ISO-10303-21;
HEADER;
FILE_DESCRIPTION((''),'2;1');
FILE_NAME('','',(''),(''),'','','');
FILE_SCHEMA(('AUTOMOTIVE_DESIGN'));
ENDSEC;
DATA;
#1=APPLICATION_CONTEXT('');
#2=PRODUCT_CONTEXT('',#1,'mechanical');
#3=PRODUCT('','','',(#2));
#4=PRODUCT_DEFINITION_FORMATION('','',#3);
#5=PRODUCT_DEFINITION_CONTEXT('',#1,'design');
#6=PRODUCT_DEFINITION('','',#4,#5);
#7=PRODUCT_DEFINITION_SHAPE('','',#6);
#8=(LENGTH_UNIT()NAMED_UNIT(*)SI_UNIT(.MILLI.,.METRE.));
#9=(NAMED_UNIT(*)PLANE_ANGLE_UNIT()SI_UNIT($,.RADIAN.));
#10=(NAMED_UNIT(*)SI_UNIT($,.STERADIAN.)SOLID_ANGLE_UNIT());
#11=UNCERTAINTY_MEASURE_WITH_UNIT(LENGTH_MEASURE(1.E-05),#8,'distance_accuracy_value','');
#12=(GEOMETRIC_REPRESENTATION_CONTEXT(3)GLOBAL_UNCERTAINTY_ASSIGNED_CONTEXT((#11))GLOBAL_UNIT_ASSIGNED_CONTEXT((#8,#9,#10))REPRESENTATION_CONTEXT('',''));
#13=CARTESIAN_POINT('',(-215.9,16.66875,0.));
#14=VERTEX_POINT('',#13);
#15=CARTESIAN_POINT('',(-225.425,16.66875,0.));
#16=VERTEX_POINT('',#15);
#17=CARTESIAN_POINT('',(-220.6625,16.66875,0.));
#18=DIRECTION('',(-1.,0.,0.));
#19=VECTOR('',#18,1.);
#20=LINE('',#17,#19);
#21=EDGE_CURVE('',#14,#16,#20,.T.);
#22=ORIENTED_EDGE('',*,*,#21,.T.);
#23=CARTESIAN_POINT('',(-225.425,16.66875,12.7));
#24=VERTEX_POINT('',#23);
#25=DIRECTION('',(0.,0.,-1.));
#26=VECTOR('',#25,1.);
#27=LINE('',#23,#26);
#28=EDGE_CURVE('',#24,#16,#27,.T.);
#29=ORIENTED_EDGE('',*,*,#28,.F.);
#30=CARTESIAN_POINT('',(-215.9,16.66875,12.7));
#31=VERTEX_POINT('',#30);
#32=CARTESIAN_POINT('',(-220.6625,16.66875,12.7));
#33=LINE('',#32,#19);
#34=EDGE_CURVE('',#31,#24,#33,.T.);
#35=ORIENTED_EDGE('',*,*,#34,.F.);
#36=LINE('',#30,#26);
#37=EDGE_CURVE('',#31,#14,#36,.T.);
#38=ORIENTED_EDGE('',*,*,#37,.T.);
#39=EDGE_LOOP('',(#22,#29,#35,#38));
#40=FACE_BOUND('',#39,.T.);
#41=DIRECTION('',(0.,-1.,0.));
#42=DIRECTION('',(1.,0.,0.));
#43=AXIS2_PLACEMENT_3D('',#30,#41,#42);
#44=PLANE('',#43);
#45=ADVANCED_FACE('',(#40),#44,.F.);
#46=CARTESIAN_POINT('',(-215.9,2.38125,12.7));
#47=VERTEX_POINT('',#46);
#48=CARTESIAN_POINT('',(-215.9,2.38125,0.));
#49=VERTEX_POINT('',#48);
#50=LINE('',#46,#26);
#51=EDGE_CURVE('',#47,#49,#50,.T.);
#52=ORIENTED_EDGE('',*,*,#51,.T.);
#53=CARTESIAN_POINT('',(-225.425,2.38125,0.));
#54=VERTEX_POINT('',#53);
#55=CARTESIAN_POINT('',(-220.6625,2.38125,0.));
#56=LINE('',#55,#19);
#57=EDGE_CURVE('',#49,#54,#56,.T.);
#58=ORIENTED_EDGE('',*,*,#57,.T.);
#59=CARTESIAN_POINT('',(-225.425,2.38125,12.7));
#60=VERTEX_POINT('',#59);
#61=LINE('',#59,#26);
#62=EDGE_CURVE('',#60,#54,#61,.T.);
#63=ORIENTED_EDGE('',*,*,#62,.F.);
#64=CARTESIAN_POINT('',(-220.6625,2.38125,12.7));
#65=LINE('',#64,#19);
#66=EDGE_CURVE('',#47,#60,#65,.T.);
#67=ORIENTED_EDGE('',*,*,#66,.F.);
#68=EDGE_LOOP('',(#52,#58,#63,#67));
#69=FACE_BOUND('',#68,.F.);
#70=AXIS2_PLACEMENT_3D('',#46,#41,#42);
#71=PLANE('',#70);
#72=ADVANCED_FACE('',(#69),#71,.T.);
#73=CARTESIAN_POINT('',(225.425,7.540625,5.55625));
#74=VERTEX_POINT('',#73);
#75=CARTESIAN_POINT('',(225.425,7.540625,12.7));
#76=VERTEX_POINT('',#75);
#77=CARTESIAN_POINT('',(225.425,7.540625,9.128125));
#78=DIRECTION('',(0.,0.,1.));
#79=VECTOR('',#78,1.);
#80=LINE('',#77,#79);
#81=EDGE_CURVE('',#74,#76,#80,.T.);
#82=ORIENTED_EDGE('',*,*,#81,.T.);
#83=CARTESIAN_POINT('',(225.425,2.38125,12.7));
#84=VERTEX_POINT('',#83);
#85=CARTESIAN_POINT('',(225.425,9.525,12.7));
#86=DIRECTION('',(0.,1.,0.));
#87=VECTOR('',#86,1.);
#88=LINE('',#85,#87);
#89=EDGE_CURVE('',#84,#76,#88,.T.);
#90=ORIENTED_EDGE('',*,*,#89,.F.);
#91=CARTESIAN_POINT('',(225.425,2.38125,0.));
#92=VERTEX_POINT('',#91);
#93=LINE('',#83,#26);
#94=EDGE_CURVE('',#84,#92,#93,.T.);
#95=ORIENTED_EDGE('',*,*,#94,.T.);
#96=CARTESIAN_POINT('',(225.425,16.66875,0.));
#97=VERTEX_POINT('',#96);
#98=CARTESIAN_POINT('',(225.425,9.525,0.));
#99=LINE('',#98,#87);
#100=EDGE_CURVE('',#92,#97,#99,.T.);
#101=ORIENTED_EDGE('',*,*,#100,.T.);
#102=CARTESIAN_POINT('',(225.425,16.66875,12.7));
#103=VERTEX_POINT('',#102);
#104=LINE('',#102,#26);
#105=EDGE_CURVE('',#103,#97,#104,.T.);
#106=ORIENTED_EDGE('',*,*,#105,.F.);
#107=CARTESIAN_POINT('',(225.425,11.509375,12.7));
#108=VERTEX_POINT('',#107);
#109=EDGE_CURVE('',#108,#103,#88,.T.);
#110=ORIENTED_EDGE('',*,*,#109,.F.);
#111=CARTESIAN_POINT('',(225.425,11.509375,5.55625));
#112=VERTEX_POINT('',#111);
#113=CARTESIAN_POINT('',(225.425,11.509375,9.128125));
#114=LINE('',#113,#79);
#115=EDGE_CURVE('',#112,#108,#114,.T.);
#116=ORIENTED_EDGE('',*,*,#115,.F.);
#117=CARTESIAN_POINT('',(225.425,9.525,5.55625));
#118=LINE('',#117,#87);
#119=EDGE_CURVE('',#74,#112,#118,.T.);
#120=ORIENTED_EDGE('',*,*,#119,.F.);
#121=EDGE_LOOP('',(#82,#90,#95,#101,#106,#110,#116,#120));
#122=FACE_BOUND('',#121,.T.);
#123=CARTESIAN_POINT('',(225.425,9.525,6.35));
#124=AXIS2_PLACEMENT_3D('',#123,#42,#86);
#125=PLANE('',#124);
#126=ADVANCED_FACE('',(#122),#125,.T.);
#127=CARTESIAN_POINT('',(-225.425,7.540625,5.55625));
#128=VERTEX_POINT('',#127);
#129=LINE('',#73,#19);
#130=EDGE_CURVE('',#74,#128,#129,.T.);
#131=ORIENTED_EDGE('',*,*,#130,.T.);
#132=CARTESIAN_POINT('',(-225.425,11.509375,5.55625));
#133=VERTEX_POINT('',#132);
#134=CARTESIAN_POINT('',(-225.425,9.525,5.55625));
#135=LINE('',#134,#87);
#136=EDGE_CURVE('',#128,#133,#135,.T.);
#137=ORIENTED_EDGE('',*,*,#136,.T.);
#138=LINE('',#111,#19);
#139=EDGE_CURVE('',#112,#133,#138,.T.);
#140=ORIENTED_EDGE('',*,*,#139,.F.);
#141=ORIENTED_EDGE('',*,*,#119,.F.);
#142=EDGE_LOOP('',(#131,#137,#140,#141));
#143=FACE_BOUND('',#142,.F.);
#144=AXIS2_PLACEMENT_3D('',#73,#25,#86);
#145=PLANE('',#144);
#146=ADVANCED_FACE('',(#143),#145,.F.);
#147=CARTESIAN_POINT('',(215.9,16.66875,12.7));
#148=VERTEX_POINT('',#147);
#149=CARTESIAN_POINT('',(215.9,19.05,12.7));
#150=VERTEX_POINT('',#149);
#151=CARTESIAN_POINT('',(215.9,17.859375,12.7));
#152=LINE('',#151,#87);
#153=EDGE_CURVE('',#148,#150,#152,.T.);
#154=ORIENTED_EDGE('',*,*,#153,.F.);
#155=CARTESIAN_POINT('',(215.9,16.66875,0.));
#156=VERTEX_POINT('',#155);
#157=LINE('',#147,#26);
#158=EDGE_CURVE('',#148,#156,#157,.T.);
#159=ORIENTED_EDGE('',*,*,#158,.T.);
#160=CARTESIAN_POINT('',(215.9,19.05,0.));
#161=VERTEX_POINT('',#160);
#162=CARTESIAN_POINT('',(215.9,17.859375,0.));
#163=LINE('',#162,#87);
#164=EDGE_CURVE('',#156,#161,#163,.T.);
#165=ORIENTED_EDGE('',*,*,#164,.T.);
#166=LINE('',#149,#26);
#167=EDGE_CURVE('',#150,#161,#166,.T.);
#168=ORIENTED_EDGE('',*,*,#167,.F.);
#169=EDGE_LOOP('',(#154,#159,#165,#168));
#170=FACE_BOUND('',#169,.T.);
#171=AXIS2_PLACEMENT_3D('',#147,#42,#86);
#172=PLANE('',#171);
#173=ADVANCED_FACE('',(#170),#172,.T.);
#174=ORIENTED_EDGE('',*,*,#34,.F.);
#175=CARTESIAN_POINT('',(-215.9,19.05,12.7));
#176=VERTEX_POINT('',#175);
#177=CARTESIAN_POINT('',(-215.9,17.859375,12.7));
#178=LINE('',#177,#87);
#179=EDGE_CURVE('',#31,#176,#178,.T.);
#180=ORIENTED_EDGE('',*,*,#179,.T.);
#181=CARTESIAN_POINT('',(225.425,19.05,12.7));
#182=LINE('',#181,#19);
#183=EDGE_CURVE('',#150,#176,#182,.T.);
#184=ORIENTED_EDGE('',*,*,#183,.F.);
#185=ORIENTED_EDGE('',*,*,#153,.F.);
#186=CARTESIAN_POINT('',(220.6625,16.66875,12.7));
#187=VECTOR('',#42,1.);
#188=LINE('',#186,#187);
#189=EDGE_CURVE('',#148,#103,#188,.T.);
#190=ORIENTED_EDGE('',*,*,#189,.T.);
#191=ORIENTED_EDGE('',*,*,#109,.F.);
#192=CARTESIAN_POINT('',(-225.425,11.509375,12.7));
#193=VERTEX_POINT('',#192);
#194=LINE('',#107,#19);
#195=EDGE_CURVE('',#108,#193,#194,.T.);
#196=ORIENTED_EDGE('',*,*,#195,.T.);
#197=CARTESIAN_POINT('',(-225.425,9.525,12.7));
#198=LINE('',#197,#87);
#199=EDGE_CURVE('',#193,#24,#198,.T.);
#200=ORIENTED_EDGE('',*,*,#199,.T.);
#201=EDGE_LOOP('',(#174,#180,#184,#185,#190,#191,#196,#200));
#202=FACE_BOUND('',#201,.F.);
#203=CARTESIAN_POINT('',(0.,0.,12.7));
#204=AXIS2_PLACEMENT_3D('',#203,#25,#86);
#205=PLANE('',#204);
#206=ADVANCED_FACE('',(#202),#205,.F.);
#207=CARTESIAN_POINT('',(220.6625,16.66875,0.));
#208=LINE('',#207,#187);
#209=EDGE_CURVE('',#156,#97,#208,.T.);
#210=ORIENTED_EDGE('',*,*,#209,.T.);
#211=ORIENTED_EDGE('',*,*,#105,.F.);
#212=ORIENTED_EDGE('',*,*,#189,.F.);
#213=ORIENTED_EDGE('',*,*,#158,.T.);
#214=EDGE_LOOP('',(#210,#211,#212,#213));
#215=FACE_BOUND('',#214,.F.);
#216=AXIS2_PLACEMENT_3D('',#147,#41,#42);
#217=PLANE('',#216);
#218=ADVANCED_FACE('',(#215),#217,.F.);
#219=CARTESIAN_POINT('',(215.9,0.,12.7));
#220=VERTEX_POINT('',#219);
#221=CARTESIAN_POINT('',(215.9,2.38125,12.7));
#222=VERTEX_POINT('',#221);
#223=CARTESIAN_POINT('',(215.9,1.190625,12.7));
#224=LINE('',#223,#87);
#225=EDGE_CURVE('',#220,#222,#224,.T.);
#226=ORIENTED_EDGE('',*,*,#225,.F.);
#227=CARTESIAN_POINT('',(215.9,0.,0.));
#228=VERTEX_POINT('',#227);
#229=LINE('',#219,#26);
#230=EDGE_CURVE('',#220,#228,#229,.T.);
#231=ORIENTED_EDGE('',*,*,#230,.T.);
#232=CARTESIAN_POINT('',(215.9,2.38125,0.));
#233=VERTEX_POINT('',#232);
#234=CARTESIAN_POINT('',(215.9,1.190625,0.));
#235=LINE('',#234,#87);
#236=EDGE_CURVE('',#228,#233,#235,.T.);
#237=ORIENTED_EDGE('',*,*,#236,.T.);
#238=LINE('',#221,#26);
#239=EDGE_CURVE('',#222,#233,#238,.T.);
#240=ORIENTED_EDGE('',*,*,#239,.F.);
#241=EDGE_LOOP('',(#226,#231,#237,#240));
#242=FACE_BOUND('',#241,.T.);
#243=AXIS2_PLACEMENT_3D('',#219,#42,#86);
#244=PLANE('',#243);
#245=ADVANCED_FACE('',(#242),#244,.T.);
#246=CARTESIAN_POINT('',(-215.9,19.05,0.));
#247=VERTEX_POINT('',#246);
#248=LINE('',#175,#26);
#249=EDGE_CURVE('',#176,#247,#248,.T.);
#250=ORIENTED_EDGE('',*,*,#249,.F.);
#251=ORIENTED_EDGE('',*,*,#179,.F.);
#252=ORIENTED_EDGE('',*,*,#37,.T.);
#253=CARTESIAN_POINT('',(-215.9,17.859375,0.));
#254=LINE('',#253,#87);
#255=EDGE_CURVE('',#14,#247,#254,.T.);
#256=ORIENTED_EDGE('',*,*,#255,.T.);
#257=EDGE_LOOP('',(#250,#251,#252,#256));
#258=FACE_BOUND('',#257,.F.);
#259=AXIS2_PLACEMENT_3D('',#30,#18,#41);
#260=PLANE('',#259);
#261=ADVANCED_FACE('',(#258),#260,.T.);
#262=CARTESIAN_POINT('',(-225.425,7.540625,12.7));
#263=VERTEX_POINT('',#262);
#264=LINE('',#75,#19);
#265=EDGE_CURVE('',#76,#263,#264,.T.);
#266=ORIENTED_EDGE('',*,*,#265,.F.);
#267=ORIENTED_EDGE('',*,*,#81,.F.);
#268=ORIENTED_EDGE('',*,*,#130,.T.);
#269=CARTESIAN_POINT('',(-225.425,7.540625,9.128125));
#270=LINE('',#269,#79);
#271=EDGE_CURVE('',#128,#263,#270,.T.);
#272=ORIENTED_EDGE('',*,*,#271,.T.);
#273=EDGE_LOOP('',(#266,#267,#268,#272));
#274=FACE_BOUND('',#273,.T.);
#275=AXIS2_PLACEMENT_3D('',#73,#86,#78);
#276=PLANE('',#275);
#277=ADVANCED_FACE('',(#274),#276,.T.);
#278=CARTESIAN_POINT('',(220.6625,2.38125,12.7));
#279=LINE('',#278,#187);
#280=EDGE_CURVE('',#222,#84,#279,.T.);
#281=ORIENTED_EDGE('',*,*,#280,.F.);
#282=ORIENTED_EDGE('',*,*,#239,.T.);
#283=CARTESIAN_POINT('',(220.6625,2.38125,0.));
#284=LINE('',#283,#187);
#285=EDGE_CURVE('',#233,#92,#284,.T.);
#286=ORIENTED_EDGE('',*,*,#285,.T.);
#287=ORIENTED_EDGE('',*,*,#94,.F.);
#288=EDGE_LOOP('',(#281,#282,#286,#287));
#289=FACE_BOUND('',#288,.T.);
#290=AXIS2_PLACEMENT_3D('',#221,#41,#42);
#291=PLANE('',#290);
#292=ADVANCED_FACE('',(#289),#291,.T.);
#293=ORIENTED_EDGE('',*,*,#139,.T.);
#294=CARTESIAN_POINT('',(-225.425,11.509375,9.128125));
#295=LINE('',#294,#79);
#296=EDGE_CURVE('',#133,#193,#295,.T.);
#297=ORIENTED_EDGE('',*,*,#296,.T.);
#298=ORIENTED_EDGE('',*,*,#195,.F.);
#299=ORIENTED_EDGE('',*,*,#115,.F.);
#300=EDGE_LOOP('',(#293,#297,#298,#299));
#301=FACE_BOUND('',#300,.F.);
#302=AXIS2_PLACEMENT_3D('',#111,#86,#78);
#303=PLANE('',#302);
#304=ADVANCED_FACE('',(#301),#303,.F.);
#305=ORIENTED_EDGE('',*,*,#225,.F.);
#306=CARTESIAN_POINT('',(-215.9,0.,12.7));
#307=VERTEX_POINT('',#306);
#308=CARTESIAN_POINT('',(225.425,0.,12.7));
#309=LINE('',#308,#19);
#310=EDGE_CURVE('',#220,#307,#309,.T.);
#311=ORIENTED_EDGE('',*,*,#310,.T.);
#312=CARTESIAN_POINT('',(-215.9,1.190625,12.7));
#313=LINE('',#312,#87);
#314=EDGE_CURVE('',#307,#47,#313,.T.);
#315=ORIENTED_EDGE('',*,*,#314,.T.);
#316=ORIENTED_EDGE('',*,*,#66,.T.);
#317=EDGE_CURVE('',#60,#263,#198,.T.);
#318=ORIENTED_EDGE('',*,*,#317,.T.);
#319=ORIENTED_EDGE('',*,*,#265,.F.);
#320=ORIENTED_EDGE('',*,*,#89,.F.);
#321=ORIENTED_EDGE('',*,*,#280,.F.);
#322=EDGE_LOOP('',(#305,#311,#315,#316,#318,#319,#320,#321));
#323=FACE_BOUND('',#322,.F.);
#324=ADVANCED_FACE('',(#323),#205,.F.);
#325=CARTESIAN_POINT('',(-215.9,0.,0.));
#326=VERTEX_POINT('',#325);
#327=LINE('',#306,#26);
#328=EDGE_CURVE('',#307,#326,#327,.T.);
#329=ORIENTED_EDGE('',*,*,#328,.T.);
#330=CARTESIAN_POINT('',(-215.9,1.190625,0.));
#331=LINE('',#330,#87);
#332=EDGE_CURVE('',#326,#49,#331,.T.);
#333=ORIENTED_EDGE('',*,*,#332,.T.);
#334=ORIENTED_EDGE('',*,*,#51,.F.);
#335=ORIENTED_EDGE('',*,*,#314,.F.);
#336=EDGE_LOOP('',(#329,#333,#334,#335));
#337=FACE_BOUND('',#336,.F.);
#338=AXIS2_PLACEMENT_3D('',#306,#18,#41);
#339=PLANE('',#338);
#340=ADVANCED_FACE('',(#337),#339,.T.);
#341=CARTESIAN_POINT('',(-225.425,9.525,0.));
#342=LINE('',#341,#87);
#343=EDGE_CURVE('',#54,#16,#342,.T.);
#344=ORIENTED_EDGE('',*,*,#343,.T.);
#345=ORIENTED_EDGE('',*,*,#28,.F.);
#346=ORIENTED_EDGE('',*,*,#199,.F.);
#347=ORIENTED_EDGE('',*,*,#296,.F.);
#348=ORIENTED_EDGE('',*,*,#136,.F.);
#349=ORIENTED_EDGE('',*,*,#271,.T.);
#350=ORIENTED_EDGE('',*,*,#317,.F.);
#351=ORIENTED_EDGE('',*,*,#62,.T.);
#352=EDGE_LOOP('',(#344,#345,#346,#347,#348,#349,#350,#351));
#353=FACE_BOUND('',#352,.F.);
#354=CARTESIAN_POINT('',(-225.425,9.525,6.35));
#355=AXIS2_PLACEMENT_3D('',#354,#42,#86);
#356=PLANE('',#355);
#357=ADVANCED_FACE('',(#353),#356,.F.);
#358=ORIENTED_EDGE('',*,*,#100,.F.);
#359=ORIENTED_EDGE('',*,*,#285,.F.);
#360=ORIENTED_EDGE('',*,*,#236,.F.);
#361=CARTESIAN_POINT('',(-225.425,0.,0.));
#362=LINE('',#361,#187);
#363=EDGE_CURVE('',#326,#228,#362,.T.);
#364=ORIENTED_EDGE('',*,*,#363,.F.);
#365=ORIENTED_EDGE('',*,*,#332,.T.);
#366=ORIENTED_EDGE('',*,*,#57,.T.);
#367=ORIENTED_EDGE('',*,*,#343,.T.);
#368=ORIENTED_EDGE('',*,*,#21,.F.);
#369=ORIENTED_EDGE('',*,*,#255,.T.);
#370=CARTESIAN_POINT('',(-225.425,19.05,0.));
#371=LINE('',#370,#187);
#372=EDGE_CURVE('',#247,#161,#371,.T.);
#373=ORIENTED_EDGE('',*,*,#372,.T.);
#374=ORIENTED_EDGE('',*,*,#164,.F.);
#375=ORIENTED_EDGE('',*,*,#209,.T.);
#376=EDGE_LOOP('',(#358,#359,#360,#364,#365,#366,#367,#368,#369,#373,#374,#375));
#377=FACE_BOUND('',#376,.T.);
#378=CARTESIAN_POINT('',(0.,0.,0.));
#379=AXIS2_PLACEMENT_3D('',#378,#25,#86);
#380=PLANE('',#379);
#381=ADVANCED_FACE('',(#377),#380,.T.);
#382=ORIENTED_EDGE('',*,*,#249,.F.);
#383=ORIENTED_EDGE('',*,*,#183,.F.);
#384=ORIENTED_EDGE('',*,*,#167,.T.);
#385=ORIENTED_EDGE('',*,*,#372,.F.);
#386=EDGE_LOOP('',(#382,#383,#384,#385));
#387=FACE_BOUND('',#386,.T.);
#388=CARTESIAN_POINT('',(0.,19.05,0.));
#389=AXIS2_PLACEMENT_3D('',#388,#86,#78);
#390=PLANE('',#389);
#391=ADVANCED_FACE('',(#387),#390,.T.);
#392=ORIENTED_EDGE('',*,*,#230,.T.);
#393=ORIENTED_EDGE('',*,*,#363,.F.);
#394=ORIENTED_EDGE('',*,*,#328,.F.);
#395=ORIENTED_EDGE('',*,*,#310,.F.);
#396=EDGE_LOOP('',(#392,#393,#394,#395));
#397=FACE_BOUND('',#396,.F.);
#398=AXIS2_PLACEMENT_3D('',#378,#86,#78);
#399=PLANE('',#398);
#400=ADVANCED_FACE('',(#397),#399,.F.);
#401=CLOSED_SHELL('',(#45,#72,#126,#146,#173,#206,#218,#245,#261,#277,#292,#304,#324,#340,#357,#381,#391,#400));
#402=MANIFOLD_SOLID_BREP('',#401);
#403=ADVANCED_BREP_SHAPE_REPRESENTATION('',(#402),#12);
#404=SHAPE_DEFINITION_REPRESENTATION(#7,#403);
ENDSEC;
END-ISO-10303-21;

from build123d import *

# Parameters (mm, degrees)
F0_W     = 19.05
F0_H     = 12.7
F1_DEPTH = 225.425
F2_W     = 3.96875
F2_H     = 7.14375
F3_DEPTH = 450.85
F4_W     = 9.525
F4_H     = 2.38125
F5_DEPTH = 12.7


# Not quite as in the source:
# - a pattern or mirror of a feature is missing from the dataset's text; its kind, count and spacing are read off the source's solid


with BuildPart() as f1:
    # F0 (on Right) → F1 (new body, symmetric)
    with BuildSketch(Plane.YZ):
        with Locations((9.525, 6.35)):
            Rectangle(F0_W, F0_H)
    extrude(amount=F1_DEPTH, both=True)

    # F2 (on face) → F3 (cut, through all)
    with BuildSketch(Plane.YZ.offset(225.425)):
        with Locations((9.525, 9.128125)):
            Rectangle(F2_W, F2_H)
    extrude(amount=-F3_DEPTH, mode=Mode.SUBTRACT)

    # F4 (on face) → F5 (cut, through all)
    with BuildSketch(Plane.XY.offset(12.7)):
        with Locations((220.6625, 17.859375)):
            Rectangle(F4_W, F4_H)
        with Locations((220.6625, 1.190625)):
            Rectangle(F4_W, F4_H)
    f5 = extrude(amount=-F5_DEPTH, mode=Mode.SUBTRACT)

    # F5_copies: F5 across plane
    add(f5.mirror(Plane(origin=(0, 0, 0), x_dir=(0, 0, -1), z_dir=(-1, 0, 0))), mode=Mode.SUBTRACT)


solid = f1.part
